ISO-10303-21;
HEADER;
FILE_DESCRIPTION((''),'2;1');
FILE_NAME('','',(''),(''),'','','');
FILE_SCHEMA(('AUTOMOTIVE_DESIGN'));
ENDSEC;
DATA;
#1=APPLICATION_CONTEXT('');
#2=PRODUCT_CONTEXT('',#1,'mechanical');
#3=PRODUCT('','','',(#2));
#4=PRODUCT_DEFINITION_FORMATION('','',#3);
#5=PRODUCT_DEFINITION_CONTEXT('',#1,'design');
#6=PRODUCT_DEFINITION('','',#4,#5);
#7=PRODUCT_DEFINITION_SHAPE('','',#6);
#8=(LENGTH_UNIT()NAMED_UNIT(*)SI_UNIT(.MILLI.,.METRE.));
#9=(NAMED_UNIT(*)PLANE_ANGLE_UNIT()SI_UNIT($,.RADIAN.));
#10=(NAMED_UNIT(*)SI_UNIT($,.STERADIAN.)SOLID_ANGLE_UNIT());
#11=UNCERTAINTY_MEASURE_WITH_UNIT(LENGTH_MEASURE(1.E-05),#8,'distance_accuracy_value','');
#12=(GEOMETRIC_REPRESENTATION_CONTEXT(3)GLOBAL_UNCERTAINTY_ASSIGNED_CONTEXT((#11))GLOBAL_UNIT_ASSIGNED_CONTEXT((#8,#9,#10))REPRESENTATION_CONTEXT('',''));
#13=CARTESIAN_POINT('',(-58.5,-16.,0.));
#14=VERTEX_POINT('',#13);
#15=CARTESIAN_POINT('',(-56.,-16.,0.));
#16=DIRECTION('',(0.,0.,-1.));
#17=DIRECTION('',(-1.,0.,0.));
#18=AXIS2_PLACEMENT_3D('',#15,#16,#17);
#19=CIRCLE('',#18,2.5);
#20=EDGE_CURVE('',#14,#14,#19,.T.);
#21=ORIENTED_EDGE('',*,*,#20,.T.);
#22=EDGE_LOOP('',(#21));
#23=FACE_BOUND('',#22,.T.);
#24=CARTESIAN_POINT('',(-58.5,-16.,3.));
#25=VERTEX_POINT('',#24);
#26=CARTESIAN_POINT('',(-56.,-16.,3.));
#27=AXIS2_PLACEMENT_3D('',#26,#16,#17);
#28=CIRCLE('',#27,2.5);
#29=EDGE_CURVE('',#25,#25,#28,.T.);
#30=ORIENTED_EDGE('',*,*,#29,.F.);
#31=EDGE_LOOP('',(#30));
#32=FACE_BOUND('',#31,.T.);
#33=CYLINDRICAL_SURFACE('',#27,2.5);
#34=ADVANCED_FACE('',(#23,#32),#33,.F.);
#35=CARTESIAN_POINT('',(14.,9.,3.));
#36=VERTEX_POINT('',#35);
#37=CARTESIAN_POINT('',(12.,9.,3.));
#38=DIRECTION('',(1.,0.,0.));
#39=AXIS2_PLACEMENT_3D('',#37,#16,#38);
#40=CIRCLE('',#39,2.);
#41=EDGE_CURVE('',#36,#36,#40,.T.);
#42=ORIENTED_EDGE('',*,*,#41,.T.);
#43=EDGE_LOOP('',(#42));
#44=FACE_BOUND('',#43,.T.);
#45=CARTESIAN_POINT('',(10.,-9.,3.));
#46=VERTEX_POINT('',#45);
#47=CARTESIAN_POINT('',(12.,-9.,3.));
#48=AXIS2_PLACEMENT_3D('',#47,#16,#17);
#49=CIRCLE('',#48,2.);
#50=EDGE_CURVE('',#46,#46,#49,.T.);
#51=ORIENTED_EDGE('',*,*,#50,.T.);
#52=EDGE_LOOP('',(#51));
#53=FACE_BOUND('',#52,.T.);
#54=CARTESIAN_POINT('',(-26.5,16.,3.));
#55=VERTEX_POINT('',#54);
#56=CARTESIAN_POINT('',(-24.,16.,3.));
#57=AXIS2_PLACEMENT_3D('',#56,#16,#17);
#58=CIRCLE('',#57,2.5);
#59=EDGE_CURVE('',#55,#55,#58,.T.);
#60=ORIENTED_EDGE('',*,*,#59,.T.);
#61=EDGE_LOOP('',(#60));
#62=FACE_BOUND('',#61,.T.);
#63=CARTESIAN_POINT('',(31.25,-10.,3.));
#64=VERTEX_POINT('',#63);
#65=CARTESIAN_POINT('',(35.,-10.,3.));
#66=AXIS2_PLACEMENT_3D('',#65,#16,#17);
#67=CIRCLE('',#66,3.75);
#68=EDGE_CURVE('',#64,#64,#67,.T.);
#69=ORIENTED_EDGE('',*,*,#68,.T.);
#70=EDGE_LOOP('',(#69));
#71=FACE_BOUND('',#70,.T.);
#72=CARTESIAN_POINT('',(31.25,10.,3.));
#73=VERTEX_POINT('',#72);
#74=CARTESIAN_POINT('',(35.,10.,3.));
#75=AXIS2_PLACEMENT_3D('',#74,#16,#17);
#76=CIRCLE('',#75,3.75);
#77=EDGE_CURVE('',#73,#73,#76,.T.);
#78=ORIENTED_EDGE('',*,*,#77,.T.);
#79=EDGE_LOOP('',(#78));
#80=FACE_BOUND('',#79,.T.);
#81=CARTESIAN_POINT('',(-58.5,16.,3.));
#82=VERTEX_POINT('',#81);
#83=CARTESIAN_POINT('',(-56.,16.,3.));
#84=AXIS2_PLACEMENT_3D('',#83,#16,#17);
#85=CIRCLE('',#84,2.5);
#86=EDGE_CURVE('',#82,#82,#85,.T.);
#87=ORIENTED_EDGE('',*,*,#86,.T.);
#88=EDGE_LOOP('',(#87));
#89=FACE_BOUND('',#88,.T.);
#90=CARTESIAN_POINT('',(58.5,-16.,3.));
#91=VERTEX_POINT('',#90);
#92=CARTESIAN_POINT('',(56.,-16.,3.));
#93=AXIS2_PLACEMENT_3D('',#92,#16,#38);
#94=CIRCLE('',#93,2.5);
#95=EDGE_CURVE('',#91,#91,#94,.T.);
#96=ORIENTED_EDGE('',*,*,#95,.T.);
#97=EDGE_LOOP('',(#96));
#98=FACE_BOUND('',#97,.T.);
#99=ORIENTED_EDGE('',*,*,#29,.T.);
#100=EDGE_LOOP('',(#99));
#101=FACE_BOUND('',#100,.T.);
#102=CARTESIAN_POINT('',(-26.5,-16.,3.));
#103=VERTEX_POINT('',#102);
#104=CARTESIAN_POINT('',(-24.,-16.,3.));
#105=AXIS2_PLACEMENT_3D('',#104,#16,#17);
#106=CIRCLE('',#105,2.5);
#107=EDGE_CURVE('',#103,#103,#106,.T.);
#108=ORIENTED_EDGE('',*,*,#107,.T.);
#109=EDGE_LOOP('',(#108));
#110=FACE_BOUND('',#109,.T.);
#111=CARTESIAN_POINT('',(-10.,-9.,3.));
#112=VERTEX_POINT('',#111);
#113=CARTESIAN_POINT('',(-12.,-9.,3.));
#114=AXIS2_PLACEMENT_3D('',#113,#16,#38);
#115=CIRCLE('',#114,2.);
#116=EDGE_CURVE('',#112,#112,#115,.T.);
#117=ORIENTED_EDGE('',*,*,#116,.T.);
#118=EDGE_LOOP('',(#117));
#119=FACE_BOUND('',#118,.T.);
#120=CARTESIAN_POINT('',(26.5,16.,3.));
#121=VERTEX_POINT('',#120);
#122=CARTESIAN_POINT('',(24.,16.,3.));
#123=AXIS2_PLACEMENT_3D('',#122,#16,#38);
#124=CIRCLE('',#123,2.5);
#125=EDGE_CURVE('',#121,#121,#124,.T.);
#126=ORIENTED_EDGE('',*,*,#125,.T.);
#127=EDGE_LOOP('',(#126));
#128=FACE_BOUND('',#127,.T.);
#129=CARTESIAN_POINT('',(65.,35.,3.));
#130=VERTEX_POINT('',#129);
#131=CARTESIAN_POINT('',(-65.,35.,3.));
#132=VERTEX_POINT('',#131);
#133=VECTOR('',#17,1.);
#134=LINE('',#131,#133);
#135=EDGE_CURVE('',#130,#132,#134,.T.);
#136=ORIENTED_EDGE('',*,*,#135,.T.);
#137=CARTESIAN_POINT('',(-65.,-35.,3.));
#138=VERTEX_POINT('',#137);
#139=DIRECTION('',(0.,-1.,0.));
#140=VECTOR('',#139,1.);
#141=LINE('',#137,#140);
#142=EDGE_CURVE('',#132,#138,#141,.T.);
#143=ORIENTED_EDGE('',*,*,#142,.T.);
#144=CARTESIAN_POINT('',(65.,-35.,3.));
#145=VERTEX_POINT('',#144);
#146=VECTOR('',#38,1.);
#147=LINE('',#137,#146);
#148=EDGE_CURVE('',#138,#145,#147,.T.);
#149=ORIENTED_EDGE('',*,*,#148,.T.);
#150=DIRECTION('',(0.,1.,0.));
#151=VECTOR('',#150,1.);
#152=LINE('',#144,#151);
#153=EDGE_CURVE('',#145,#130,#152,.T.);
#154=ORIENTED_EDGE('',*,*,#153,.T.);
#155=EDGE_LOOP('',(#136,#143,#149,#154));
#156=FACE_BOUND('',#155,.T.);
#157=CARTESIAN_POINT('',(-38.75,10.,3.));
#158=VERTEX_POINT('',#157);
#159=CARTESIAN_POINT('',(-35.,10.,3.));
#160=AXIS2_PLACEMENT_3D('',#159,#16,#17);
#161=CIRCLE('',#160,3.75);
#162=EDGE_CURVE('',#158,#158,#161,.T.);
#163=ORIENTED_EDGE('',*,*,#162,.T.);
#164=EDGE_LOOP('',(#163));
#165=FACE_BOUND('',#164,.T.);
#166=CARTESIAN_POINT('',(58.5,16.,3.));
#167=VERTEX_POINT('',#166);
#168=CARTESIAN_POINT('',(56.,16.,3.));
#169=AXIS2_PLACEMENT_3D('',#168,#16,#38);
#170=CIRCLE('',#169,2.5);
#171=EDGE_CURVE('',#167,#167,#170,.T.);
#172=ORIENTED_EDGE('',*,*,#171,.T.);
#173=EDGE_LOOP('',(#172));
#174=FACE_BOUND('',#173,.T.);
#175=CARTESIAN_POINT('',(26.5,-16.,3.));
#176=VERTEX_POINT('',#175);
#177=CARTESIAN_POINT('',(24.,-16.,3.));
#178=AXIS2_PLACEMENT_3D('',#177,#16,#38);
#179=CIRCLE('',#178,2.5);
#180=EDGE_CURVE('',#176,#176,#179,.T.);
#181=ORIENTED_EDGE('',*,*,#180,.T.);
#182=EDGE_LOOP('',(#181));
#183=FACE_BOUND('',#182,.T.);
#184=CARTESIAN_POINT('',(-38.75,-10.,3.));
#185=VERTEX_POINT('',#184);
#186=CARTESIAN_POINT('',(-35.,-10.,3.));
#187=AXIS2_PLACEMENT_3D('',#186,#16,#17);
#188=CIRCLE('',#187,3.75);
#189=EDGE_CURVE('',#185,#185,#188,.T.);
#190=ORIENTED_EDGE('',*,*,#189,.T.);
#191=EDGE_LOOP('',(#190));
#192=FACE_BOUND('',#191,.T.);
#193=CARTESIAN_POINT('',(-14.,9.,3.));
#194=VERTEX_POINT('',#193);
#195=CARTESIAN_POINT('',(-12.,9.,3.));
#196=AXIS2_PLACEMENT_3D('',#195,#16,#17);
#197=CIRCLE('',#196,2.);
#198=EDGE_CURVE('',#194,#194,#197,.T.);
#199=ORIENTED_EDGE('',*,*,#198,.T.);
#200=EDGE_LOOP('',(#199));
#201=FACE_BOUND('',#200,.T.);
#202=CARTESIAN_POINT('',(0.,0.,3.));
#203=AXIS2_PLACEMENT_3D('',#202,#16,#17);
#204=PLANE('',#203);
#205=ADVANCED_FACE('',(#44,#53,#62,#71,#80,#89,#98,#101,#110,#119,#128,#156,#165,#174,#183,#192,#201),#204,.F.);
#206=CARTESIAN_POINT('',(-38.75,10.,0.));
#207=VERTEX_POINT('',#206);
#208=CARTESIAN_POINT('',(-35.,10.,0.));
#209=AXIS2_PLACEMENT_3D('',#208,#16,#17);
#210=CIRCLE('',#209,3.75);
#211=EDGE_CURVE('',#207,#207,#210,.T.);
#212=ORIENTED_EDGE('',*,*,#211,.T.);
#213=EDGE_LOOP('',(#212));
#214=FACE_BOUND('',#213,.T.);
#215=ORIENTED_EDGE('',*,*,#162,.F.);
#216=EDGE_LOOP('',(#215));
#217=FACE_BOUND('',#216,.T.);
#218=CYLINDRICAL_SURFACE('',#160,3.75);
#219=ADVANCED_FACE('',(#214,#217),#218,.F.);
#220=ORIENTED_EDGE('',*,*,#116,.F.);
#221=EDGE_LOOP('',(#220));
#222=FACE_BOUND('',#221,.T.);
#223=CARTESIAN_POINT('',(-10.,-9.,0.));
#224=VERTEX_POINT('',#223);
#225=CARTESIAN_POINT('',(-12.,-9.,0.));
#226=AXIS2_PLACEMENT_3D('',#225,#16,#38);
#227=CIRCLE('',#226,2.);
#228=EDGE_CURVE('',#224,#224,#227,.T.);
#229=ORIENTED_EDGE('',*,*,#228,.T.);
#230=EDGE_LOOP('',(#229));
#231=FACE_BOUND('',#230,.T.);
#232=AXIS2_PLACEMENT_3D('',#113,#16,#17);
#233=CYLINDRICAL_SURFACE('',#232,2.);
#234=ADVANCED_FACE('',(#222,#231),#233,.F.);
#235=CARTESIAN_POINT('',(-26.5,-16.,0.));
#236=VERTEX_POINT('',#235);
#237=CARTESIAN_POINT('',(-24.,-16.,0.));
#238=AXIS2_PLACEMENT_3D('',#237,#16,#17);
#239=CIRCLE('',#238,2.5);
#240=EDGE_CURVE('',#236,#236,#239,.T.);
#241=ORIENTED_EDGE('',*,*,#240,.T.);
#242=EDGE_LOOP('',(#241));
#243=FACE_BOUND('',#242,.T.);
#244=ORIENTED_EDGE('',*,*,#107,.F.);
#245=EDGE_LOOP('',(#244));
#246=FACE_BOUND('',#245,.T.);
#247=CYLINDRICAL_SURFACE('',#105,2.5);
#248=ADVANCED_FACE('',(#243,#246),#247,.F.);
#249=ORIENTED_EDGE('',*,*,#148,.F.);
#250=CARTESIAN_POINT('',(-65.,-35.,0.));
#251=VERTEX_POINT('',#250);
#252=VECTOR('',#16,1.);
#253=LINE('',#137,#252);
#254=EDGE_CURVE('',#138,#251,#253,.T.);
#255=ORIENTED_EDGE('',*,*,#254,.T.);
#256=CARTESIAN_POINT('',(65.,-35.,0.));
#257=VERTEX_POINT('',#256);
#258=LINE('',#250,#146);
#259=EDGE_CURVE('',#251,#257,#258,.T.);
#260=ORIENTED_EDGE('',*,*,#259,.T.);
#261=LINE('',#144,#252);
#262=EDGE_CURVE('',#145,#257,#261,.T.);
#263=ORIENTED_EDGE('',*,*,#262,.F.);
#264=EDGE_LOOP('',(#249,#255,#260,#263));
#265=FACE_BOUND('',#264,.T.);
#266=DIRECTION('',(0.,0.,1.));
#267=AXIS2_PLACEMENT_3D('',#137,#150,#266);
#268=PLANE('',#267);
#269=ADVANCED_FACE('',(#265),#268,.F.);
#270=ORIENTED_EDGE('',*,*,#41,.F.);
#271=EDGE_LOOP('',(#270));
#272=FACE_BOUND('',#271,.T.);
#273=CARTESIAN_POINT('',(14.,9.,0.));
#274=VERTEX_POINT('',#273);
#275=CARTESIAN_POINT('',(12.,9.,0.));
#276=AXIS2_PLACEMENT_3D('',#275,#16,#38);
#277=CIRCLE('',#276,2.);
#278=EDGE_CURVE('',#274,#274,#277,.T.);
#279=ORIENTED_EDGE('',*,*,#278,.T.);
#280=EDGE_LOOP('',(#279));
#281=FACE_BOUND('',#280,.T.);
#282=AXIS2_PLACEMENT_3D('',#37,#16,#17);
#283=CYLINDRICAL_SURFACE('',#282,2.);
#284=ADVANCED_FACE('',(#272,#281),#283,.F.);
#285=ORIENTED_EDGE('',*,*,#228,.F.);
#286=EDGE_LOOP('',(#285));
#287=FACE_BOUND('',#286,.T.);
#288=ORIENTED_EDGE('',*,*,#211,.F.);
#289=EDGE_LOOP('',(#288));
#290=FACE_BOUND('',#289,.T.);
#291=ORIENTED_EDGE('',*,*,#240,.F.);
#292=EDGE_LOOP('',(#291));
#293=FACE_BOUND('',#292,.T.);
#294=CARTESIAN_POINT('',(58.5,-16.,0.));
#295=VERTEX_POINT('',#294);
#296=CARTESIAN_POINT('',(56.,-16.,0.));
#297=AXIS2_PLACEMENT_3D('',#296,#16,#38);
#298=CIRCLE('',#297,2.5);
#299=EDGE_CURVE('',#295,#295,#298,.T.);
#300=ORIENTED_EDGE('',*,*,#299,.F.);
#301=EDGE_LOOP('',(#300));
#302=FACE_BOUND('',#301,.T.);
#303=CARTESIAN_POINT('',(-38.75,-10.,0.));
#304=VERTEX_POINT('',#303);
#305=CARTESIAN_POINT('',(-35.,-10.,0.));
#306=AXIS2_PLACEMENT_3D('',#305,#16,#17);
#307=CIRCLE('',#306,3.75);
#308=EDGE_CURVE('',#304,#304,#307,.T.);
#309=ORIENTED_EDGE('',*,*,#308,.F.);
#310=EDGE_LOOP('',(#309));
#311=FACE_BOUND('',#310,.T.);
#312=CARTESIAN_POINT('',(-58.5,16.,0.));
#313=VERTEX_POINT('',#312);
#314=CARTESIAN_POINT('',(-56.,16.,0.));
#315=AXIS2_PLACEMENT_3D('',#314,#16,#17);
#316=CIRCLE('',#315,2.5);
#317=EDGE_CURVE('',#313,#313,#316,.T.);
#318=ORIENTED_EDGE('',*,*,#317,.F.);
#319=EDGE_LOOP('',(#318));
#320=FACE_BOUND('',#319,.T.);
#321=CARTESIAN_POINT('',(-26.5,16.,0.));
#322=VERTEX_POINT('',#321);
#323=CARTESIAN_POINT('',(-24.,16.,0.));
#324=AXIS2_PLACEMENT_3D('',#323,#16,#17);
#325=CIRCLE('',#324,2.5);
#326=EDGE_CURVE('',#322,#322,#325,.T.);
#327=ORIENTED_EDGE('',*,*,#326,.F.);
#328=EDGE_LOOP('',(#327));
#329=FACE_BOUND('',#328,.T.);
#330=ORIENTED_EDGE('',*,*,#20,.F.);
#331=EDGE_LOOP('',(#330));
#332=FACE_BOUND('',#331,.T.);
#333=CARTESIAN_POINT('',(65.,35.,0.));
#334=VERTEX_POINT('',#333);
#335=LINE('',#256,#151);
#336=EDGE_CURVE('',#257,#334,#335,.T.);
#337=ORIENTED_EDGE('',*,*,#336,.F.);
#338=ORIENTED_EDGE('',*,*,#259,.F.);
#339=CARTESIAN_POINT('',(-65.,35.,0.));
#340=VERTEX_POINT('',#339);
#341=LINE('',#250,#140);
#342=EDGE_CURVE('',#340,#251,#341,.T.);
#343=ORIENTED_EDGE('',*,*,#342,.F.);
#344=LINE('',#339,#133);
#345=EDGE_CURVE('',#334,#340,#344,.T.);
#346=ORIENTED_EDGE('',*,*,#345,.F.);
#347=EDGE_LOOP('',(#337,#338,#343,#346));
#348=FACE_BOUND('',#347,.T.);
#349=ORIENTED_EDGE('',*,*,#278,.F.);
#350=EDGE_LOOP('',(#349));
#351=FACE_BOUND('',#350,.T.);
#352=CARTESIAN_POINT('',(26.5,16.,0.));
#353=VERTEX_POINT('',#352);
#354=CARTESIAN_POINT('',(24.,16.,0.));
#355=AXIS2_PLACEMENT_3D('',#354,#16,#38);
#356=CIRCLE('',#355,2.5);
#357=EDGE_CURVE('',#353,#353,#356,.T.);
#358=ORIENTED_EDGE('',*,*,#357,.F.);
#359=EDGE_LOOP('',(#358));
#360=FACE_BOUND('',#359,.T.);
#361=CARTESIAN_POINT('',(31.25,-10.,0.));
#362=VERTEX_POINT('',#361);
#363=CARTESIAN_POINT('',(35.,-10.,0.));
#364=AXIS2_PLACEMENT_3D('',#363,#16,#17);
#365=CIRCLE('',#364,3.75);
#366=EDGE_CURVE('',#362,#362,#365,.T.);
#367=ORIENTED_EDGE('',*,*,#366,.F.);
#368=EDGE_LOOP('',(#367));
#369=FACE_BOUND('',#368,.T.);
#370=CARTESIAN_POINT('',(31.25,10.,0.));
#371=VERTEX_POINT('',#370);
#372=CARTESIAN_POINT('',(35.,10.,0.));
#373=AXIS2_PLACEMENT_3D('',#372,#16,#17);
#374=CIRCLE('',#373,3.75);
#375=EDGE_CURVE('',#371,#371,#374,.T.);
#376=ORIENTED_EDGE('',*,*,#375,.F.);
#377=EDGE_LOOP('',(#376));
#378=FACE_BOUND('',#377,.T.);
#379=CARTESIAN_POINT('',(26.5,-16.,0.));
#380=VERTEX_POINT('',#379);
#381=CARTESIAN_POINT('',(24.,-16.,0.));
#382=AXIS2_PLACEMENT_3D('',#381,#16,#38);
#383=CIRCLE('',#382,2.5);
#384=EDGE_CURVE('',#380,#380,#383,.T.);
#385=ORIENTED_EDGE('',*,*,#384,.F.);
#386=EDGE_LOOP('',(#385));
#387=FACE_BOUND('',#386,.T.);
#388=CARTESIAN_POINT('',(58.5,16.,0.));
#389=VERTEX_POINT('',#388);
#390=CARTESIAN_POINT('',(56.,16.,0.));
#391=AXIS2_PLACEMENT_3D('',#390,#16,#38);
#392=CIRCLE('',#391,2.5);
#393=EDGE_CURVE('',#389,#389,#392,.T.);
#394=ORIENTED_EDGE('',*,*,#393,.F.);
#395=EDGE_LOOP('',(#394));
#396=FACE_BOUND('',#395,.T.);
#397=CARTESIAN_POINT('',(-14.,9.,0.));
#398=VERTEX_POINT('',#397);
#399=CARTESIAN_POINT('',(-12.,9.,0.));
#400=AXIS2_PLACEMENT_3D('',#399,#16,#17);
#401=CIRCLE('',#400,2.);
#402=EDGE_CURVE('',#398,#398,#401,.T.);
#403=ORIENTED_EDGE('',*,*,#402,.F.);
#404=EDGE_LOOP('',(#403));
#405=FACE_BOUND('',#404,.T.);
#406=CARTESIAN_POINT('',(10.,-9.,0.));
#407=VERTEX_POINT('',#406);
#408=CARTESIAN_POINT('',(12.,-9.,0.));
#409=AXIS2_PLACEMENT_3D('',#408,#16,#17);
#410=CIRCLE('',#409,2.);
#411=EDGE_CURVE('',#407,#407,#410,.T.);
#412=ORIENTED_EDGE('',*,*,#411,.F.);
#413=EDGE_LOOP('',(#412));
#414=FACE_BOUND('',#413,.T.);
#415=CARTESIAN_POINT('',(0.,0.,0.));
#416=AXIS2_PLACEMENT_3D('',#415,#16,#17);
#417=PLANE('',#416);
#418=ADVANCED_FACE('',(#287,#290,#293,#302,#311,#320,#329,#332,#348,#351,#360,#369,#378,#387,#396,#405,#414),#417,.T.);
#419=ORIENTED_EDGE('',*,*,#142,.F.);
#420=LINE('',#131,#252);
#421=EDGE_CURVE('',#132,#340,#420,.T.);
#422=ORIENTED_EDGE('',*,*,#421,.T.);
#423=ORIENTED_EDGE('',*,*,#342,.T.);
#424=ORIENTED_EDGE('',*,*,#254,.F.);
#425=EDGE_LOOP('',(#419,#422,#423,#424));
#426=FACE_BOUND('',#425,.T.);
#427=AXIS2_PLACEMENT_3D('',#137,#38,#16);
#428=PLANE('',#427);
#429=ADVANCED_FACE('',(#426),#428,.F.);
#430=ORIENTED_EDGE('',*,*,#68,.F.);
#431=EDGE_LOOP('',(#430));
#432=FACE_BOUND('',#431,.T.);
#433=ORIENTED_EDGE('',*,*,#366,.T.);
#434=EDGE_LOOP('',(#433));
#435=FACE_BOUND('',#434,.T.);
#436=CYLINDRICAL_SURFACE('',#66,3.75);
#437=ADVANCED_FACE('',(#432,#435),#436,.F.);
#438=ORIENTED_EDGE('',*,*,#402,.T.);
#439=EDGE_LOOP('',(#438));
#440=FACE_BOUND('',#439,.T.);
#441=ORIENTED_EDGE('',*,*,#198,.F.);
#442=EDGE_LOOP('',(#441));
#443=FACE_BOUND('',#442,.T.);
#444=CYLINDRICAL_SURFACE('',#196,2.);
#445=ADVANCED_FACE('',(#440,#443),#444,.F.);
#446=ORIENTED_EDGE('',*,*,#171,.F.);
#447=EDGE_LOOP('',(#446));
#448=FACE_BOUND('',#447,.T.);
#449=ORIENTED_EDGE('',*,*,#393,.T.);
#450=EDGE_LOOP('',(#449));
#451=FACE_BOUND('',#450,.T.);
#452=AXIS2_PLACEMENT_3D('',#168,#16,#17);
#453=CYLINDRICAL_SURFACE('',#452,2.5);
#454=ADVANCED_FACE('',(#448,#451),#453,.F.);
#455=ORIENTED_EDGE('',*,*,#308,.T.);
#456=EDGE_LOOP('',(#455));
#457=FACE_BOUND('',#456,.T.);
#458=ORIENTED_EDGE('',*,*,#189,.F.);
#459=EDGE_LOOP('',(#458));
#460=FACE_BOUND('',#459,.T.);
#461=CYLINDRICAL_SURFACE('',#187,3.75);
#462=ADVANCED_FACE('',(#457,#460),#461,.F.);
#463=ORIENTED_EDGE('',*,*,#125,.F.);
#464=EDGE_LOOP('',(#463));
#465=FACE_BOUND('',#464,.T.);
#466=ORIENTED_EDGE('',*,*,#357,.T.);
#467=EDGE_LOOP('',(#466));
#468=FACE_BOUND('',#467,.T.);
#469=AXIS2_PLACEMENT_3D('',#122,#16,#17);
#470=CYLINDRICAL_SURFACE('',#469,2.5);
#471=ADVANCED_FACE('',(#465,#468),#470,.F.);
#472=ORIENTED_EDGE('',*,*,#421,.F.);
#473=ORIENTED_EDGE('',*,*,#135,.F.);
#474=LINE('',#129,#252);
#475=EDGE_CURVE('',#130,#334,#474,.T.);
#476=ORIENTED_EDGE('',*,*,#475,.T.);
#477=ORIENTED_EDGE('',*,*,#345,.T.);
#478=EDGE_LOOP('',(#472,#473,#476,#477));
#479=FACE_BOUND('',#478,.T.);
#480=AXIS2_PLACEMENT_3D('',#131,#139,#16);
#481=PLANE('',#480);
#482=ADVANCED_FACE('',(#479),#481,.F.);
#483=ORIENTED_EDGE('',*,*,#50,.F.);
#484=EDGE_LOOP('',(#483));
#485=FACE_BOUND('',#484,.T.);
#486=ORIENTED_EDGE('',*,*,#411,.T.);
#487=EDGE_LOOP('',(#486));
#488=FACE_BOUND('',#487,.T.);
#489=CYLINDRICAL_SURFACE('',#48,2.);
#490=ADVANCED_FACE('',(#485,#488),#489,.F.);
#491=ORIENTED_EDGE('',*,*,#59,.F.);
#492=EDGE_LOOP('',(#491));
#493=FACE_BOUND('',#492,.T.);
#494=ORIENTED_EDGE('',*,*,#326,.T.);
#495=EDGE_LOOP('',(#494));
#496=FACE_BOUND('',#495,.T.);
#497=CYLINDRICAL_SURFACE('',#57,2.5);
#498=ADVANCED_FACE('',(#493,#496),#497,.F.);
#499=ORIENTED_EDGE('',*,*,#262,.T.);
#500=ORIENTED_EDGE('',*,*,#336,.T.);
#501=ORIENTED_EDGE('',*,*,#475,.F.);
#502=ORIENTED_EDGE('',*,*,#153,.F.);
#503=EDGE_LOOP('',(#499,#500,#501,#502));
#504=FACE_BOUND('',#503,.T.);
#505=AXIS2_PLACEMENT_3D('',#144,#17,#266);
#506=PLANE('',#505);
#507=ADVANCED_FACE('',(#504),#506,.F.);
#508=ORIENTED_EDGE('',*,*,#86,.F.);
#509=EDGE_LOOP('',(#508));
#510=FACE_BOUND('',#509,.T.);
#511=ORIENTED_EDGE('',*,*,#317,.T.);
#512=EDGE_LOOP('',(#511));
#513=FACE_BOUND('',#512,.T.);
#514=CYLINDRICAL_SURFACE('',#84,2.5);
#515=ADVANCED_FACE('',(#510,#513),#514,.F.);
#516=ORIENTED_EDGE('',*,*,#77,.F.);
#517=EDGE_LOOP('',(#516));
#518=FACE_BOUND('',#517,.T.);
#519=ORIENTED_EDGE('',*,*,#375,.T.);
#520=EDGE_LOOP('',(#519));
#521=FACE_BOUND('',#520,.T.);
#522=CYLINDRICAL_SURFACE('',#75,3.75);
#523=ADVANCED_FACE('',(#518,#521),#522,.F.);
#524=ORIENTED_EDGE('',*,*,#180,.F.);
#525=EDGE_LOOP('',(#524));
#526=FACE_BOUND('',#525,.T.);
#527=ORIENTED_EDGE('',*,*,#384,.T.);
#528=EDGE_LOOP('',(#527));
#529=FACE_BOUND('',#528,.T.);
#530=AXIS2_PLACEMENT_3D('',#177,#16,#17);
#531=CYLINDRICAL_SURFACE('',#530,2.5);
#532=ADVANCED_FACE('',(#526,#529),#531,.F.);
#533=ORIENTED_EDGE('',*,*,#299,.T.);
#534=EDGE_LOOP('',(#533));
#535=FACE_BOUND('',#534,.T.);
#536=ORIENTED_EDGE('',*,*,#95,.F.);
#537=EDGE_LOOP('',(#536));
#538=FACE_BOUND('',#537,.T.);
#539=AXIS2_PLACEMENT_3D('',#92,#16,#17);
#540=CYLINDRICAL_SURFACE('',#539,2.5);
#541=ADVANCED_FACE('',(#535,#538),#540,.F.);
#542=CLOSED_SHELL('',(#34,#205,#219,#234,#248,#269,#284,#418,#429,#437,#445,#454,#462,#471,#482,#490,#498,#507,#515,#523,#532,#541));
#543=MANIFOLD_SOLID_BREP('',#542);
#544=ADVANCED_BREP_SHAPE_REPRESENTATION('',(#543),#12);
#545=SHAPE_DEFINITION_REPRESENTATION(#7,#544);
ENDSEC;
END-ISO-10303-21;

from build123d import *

# Parameters (mm, degrees)
SKETCH1_W          = 130
SKETCH1_H          = 70
BASE_FLANGE1_DEPTH = 3
SKETCH12_R         = 2.5
SKETCH12_R_2       = 2
CUT_EXTRUDE1_DEPTH = 10
SKETCH13_R         = 3.75
CUT_EXTRUDE2_DEPTH = 10


# Sheet-metal steps are written as plain solids
with BuildPart() as part:
    # Sketch1 → Base-Flange1 (new body)
    with BuildSketch(Plane.XY):
        Rectangle(SKETCH1_W, SKETCH1_H)
    extrude(amount=BASE_FLANGE1_DEPTH)

    # Sketch12 → Cut-Extrude1 (cut)
    with BuildSketch(Plane(origin=(0, 0, 0), x_dir=(-1, 0, 0), z_dir=(0, 0, -1))):
        with Locations((56, 16)):
            Circle(SKETCH12_R)
        with Locations((56, -16)):
            Circle(SKETCH12_R)
        with Locations((24, -16)):
            Circle(SKETCH12_R)
        with Locations((24, 16)):
            Circle(SKETCH12_R)
        with Locations(Location((-24, 16, 0), (0, 0, 180))):
            Circle(SKETCH12_R)
        with Locations(Location((-24, -16, 0), (0, 0, 180))):
            Circle(SKETCH12_R)
        with Locations(Location((-56, -16, 0), (0, 0, 180))):
            Circle(SKETCH12_R)
        with Locations(Location((-56, 16, 0), (0, 0, 180))):
            Circle(SKETCH12_R)
        with Locations((12, 9)):
            Circle(SKETCH12_R_2)
        with Locations(Location((-12, 9, 0), (0, 0, 180))):
            Circle(SKETCH12_R_2)
        with Locations((-12, -9)):
            Circle(SKETCH12_R_2)
        with Locations(Location((12, -9, 0), (0, 0, 180))):
            Circle(SKETCH12_R_2)
    extrude(amount=-CUT_EXTRUDE1_DEPTH, mode=Mode.SUBTRACT)

    # Sketch13 → Cut-Extrude2 (cut)
    with BuildSketch(Plane(origin=(0, 0, 0), x_dir=(-1, 0, 0), z_dir=(0, 0, -1))):
        with Locations((35, 10)):
            Circle(SKETCH13_R)
        with Locations((-35, 10)):
            Circle(SKETCH13_R)
        with Locations((-35, -10)):
            Circle(SKETCH13_R)
        with Locations((35, -10)):
            Circle(SKETCH13_R)
    extrude(amount=-CUT_EXTRUDE2_DEPTH, mode=Mode.SUBTRACT)


solid = part.part
